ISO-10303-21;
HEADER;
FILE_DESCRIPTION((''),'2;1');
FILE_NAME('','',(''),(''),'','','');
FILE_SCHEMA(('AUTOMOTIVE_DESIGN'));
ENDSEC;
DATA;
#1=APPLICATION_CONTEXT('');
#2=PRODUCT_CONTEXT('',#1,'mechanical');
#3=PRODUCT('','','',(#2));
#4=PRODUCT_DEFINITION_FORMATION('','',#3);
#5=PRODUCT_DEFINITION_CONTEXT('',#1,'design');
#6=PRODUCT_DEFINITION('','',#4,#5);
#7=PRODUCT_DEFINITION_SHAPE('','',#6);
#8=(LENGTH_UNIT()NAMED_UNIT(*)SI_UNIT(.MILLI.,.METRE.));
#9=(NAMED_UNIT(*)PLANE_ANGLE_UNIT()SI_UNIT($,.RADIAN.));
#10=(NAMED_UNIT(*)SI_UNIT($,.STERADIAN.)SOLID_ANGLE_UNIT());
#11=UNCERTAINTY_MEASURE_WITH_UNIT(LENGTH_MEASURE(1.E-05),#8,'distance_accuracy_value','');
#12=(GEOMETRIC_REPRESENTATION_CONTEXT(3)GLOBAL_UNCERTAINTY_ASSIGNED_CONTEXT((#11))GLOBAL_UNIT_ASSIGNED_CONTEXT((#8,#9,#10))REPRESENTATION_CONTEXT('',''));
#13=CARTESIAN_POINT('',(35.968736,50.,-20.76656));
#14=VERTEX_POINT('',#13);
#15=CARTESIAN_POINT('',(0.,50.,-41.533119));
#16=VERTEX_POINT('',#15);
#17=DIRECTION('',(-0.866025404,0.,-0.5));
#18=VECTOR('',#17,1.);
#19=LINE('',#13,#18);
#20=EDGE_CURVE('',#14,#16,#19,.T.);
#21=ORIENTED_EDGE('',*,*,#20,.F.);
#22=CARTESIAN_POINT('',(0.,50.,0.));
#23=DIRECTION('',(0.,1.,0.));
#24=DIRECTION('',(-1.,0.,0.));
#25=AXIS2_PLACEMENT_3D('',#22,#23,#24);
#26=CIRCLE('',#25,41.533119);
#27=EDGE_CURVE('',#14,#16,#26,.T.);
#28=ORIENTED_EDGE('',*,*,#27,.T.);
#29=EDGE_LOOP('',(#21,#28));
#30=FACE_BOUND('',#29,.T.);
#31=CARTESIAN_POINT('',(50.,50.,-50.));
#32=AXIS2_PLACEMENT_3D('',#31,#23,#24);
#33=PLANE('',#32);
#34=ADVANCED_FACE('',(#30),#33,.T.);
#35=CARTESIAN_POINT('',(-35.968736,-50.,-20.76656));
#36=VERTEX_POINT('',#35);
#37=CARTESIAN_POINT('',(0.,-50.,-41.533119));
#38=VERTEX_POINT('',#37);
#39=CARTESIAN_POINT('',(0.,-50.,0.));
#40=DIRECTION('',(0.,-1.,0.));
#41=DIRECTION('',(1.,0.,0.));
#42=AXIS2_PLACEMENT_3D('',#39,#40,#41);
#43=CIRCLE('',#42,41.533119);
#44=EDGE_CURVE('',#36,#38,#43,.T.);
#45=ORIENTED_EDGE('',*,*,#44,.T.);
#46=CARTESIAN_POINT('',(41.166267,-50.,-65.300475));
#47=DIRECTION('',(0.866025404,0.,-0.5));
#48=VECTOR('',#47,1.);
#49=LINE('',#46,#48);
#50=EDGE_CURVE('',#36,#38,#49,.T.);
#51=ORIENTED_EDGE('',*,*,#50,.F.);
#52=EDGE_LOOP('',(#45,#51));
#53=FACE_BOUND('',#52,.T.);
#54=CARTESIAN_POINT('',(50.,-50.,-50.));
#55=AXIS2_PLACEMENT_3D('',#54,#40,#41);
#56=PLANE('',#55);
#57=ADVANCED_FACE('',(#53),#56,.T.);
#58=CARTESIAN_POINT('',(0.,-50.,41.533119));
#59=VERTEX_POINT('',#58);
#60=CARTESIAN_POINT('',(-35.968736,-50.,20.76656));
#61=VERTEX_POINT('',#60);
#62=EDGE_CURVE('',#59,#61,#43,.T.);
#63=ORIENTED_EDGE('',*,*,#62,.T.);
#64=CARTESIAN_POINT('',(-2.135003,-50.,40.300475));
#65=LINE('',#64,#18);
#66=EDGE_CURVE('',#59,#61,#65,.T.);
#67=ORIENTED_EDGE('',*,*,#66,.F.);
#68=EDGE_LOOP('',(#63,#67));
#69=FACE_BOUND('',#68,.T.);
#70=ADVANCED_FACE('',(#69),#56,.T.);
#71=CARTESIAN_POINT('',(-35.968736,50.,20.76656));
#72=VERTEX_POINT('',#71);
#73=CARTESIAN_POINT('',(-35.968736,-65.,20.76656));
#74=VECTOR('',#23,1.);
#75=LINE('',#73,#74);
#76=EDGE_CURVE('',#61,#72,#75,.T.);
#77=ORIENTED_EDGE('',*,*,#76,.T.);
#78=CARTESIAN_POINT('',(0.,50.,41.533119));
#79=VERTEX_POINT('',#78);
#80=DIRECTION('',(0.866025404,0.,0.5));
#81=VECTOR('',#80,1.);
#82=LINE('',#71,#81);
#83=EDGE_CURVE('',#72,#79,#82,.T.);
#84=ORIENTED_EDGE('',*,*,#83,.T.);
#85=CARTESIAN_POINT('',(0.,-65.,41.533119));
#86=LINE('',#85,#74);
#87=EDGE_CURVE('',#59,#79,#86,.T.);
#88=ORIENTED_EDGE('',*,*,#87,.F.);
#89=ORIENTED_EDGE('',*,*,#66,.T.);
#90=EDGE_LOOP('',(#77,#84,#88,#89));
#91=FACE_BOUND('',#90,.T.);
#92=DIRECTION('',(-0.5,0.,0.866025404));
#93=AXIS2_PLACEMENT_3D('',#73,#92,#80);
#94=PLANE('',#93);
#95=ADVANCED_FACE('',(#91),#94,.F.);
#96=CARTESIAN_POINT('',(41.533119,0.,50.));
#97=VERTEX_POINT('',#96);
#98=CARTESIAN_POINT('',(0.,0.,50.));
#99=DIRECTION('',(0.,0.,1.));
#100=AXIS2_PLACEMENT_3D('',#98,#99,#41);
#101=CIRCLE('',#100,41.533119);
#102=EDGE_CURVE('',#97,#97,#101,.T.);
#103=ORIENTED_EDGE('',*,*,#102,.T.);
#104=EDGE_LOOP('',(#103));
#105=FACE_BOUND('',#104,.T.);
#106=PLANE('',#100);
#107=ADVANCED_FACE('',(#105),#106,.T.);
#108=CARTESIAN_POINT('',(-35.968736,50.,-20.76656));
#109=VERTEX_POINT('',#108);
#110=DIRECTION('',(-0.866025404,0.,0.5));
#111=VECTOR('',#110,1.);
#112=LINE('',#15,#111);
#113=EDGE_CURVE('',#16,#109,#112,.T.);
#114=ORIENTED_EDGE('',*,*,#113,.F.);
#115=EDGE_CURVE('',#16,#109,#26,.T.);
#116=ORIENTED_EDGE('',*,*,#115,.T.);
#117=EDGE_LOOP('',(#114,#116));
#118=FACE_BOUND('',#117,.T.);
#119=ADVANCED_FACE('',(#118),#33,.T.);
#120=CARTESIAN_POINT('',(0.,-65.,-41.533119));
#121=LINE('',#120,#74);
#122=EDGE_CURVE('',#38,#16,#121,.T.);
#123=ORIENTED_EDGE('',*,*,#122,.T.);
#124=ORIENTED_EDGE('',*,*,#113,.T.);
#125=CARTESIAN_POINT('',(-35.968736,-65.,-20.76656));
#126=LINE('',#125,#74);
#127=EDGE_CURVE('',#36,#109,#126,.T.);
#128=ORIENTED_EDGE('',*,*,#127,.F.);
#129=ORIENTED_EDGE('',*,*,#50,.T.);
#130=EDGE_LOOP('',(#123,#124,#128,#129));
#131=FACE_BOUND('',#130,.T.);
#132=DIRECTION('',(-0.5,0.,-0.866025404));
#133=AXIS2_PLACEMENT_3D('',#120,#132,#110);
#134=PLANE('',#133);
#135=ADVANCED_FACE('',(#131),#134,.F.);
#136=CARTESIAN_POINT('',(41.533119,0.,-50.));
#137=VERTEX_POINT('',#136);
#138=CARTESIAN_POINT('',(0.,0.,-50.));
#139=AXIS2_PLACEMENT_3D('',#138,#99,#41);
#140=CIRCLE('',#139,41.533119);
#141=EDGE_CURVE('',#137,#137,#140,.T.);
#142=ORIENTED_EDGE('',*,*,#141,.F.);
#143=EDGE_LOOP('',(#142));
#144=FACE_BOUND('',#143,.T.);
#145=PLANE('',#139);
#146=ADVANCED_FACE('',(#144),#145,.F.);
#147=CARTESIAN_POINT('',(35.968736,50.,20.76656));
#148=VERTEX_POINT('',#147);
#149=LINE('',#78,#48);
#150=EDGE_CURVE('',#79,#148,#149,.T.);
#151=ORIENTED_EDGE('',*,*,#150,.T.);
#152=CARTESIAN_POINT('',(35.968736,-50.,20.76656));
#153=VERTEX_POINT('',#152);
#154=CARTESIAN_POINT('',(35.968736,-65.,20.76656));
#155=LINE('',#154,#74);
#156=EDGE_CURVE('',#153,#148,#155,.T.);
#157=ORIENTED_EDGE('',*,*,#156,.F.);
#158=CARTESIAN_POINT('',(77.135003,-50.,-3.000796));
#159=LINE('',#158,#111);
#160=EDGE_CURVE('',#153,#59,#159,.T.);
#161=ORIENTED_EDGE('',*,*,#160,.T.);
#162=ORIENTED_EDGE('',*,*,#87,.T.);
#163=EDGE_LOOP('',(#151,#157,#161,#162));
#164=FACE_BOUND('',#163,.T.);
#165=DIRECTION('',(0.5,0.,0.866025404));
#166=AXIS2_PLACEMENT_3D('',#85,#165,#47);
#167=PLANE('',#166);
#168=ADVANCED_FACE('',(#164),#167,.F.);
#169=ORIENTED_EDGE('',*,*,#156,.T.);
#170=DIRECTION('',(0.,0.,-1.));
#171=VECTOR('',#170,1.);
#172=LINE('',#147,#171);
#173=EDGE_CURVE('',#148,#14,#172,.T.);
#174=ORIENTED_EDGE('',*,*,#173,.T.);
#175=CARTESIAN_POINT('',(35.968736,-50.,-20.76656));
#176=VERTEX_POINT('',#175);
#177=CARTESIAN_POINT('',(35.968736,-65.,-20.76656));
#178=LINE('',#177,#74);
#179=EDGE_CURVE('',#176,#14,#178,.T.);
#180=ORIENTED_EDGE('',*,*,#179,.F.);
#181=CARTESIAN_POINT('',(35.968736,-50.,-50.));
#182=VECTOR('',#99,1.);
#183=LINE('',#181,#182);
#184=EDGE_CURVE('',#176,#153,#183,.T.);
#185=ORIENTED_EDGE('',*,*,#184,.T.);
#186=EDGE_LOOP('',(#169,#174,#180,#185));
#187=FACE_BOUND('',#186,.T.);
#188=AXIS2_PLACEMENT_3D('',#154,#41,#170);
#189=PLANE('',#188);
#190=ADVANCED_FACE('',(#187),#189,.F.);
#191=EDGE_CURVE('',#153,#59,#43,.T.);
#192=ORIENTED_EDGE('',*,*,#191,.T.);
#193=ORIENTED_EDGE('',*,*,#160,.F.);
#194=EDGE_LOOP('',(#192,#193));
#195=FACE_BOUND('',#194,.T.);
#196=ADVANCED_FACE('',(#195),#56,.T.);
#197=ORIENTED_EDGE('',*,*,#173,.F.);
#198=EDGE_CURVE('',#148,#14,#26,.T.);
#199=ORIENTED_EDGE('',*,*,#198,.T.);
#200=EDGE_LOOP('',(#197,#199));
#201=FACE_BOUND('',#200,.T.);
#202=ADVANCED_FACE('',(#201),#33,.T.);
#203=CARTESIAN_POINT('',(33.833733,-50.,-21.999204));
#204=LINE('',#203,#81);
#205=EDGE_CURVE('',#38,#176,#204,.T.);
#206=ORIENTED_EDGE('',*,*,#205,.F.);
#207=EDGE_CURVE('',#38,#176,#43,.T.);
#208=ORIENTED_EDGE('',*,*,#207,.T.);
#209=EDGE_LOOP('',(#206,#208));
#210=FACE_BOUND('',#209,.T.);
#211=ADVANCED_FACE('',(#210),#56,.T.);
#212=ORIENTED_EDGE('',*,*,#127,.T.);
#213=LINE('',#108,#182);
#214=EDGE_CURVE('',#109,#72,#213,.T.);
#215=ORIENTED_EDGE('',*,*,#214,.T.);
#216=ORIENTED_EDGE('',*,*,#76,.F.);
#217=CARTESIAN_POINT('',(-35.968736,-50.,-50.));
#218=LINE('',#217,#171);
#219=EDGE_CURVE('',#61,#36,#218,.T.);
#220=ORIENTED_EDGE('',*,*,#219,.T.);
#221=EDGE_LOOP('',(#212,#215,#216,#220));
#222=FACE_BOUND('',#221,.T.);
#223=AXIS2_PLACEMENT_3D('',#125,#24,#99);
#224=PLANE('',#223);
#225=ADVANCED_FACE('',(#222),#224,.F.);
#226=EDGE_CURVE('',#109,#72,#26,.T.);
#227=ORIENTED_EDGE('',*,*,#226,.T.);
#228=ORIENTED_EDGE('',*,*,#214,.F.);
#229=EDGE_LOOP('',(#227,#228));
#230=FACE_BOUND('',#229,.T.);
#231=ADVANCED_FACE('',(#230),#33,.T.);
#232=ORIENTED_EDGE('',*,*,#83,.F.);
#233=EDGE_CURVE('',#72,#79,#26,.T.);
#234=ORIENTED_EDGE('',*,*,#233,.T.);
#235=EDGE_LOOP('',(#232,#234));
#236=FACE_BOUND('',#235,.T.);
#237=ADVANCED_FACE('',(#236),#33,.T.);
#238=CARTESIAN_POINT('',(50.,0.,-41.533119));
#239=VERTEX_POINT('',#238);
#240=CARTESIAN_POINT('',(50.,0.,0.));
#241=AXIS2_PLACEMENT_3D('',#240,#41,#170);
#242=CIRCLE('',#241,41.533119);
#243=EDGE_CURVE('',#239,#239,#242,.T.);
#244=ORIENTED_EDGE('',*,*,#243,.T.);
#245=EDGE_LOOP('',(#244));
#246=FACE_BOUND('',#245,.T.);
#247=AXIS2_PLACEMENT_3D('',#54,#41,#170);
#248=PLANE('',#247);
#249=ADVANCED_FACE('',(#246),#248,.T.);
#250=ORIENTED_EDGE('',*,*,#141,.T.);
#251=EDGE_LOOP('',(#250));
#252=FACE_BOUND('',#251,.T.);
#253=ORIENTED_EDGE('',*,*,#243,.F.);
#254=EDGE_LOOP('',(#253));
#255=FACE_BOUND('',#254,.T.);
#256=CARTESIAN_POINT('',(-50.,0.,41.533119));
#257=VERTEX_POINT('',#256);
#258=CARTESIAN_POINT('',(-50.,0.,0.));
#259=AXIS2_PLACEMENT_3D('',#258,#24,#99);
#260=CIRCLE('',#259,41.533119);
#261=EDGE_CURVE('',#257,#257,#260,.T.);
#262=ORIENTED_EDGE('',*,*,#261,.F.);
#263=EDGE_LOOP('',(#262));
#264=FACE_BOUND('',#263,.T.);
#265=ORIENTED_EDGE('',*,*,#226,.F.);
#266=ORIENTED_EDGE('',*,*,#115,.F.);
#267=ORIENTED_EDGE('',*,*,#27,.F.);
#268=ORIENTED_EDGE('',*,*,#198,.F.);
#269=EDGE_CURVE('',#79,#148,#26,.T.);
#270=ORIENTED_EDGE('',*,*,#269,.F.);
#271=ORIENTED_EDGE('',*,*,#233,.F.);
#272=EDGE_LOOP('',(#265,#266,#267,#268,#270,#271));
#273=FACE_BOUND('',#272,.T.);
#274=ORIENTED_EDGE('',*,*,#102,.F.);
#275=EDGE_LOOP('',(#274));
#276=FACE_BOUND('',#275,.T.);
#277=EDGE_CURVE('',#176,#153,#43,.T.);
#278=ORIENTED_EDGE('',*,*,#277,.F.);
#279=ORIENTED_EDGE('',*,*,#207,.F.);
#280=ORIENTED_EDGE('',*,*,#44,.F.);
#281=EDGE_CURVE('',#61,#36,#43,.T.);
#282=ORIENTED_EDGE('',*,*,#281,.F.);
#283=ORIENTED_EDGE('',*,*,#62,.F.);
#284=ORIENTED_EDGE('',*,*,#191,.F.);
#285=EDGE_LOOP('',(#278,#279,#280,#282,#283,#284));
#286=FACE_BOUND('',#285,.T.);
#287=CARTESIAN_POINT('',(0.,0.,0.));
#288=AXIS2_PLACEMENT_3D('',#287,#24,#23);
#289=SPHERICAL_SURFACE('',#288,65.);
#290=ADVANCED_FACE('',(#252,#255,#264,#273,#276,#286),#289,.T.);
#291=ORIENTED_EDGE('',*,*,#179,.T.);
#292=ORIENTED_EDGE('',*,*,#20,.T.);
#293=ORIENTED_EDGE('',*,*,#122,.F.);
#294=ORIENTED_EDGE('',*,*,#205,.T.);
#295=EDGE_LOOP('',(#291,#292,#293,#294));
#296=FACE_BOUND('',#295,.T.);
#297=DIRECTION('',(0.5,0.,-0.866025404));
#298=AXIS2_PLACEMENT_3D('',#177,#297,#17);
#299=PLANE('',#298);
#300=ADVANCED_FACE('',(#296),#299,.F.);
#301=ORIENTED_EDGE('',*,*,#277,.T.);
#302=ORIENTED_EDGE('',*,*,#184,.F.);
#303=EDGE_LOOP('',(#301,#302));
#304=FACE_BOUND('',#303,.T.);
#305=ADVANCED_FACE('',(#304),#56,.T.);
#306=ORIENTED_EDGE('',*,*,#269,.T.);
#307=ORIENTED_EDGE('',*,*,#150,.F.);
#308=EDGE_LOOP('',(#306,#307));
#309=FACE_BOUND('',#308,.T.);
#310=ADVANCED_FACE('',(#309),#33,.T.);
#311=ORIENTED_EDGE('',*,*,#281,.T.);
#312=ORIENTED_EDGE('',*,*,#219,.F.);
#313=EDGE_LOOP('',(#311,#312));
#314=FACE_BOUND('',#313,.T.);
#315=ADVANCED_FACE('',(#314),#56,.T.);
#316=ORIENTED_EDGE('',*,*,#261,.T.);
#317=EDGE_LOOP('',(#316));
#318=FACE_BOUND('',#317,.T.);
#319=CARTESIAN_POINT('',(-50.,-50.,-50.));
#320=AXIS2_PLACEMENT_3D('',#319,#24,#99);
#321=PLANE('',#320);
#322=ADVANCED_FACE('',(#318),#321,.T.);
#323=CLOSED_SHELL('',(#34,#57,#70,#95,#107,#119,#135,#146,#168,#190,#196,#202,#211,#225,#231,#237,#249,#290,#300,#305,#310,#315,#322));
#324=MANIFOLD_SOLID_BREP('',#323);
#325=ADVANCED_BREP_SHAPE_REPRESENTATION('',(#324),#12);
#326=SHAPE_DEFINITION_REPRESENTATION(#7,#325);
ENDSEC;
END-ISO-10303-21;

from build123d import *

# Parameters (mm, degrees)
P_IDAT_VYSUNUT_M1_DEPTH      = 50
P_IDAT_VYSUNUT_M1_DEPTH_BACK = 50
SKICA2_W                     = 100
SKICA2_H                     = 100
ODEBRAT_VYSUNUT_M1_DEPTH     = 123.474487139


with BuildPart() as part:
    # Skica1 → Rotovat1 (revolve)
    with BuildSketch(Plane.XY):
        with BuildLine():
            Line((0, 0), (-65, 0))
            ThreePointArc((-65, 0), (0, 65), (65, 0))
            Line((65, 0), (0, 0))
        make_face()
    revolve(axis=Axis((0, 0, 0), (1, 0, 0)))


with BuildPart() as body_2:
    # Skica2 → Přidat vysunutím1 (new, two sides: drawn at the far end of the back side and taken through both)
    with BuildSketch(Plane.XY.offset(-P_IDAT_VYSUNUT_M1_DEPTH_BACK)):
        Rectangle(SKICA2_W, SKICA2_H)
    extrude(amount=P_IDAT_VYSUNUT_M1_DEPTH + P_IDAT_VYSUNUT_M1_DEPTH_BACK)


with BuildPart() as part_1:
    add(part.part)

    # Průsečík1: read off the stored shape, not the designer's step
    # Průsečík1: intersect body 2
    add(body_2.part, mode=Mode.INTERSECT)

    # Skica3 → Odebrat vysunutím1 (cut, through all)
    with BuildSketch(Plane(origin=(0, 50, 0), x_dir=(1, 0, 0), z_dir=(0, 1, 0))):
        Polygon((0, 41.533119315), (-35.968736425, 20.766559657), (-35.968736425, -20.766559657), (0, -41.533119315), (35.968736425, -20.766559657), (35.968736425, 20.766559657), align=None)
    extrude(amount=-ODEBRAT_VYSUNUT_M1_DEPTH, mode=Mode.SUBTRACT)


solid = part_1.part
